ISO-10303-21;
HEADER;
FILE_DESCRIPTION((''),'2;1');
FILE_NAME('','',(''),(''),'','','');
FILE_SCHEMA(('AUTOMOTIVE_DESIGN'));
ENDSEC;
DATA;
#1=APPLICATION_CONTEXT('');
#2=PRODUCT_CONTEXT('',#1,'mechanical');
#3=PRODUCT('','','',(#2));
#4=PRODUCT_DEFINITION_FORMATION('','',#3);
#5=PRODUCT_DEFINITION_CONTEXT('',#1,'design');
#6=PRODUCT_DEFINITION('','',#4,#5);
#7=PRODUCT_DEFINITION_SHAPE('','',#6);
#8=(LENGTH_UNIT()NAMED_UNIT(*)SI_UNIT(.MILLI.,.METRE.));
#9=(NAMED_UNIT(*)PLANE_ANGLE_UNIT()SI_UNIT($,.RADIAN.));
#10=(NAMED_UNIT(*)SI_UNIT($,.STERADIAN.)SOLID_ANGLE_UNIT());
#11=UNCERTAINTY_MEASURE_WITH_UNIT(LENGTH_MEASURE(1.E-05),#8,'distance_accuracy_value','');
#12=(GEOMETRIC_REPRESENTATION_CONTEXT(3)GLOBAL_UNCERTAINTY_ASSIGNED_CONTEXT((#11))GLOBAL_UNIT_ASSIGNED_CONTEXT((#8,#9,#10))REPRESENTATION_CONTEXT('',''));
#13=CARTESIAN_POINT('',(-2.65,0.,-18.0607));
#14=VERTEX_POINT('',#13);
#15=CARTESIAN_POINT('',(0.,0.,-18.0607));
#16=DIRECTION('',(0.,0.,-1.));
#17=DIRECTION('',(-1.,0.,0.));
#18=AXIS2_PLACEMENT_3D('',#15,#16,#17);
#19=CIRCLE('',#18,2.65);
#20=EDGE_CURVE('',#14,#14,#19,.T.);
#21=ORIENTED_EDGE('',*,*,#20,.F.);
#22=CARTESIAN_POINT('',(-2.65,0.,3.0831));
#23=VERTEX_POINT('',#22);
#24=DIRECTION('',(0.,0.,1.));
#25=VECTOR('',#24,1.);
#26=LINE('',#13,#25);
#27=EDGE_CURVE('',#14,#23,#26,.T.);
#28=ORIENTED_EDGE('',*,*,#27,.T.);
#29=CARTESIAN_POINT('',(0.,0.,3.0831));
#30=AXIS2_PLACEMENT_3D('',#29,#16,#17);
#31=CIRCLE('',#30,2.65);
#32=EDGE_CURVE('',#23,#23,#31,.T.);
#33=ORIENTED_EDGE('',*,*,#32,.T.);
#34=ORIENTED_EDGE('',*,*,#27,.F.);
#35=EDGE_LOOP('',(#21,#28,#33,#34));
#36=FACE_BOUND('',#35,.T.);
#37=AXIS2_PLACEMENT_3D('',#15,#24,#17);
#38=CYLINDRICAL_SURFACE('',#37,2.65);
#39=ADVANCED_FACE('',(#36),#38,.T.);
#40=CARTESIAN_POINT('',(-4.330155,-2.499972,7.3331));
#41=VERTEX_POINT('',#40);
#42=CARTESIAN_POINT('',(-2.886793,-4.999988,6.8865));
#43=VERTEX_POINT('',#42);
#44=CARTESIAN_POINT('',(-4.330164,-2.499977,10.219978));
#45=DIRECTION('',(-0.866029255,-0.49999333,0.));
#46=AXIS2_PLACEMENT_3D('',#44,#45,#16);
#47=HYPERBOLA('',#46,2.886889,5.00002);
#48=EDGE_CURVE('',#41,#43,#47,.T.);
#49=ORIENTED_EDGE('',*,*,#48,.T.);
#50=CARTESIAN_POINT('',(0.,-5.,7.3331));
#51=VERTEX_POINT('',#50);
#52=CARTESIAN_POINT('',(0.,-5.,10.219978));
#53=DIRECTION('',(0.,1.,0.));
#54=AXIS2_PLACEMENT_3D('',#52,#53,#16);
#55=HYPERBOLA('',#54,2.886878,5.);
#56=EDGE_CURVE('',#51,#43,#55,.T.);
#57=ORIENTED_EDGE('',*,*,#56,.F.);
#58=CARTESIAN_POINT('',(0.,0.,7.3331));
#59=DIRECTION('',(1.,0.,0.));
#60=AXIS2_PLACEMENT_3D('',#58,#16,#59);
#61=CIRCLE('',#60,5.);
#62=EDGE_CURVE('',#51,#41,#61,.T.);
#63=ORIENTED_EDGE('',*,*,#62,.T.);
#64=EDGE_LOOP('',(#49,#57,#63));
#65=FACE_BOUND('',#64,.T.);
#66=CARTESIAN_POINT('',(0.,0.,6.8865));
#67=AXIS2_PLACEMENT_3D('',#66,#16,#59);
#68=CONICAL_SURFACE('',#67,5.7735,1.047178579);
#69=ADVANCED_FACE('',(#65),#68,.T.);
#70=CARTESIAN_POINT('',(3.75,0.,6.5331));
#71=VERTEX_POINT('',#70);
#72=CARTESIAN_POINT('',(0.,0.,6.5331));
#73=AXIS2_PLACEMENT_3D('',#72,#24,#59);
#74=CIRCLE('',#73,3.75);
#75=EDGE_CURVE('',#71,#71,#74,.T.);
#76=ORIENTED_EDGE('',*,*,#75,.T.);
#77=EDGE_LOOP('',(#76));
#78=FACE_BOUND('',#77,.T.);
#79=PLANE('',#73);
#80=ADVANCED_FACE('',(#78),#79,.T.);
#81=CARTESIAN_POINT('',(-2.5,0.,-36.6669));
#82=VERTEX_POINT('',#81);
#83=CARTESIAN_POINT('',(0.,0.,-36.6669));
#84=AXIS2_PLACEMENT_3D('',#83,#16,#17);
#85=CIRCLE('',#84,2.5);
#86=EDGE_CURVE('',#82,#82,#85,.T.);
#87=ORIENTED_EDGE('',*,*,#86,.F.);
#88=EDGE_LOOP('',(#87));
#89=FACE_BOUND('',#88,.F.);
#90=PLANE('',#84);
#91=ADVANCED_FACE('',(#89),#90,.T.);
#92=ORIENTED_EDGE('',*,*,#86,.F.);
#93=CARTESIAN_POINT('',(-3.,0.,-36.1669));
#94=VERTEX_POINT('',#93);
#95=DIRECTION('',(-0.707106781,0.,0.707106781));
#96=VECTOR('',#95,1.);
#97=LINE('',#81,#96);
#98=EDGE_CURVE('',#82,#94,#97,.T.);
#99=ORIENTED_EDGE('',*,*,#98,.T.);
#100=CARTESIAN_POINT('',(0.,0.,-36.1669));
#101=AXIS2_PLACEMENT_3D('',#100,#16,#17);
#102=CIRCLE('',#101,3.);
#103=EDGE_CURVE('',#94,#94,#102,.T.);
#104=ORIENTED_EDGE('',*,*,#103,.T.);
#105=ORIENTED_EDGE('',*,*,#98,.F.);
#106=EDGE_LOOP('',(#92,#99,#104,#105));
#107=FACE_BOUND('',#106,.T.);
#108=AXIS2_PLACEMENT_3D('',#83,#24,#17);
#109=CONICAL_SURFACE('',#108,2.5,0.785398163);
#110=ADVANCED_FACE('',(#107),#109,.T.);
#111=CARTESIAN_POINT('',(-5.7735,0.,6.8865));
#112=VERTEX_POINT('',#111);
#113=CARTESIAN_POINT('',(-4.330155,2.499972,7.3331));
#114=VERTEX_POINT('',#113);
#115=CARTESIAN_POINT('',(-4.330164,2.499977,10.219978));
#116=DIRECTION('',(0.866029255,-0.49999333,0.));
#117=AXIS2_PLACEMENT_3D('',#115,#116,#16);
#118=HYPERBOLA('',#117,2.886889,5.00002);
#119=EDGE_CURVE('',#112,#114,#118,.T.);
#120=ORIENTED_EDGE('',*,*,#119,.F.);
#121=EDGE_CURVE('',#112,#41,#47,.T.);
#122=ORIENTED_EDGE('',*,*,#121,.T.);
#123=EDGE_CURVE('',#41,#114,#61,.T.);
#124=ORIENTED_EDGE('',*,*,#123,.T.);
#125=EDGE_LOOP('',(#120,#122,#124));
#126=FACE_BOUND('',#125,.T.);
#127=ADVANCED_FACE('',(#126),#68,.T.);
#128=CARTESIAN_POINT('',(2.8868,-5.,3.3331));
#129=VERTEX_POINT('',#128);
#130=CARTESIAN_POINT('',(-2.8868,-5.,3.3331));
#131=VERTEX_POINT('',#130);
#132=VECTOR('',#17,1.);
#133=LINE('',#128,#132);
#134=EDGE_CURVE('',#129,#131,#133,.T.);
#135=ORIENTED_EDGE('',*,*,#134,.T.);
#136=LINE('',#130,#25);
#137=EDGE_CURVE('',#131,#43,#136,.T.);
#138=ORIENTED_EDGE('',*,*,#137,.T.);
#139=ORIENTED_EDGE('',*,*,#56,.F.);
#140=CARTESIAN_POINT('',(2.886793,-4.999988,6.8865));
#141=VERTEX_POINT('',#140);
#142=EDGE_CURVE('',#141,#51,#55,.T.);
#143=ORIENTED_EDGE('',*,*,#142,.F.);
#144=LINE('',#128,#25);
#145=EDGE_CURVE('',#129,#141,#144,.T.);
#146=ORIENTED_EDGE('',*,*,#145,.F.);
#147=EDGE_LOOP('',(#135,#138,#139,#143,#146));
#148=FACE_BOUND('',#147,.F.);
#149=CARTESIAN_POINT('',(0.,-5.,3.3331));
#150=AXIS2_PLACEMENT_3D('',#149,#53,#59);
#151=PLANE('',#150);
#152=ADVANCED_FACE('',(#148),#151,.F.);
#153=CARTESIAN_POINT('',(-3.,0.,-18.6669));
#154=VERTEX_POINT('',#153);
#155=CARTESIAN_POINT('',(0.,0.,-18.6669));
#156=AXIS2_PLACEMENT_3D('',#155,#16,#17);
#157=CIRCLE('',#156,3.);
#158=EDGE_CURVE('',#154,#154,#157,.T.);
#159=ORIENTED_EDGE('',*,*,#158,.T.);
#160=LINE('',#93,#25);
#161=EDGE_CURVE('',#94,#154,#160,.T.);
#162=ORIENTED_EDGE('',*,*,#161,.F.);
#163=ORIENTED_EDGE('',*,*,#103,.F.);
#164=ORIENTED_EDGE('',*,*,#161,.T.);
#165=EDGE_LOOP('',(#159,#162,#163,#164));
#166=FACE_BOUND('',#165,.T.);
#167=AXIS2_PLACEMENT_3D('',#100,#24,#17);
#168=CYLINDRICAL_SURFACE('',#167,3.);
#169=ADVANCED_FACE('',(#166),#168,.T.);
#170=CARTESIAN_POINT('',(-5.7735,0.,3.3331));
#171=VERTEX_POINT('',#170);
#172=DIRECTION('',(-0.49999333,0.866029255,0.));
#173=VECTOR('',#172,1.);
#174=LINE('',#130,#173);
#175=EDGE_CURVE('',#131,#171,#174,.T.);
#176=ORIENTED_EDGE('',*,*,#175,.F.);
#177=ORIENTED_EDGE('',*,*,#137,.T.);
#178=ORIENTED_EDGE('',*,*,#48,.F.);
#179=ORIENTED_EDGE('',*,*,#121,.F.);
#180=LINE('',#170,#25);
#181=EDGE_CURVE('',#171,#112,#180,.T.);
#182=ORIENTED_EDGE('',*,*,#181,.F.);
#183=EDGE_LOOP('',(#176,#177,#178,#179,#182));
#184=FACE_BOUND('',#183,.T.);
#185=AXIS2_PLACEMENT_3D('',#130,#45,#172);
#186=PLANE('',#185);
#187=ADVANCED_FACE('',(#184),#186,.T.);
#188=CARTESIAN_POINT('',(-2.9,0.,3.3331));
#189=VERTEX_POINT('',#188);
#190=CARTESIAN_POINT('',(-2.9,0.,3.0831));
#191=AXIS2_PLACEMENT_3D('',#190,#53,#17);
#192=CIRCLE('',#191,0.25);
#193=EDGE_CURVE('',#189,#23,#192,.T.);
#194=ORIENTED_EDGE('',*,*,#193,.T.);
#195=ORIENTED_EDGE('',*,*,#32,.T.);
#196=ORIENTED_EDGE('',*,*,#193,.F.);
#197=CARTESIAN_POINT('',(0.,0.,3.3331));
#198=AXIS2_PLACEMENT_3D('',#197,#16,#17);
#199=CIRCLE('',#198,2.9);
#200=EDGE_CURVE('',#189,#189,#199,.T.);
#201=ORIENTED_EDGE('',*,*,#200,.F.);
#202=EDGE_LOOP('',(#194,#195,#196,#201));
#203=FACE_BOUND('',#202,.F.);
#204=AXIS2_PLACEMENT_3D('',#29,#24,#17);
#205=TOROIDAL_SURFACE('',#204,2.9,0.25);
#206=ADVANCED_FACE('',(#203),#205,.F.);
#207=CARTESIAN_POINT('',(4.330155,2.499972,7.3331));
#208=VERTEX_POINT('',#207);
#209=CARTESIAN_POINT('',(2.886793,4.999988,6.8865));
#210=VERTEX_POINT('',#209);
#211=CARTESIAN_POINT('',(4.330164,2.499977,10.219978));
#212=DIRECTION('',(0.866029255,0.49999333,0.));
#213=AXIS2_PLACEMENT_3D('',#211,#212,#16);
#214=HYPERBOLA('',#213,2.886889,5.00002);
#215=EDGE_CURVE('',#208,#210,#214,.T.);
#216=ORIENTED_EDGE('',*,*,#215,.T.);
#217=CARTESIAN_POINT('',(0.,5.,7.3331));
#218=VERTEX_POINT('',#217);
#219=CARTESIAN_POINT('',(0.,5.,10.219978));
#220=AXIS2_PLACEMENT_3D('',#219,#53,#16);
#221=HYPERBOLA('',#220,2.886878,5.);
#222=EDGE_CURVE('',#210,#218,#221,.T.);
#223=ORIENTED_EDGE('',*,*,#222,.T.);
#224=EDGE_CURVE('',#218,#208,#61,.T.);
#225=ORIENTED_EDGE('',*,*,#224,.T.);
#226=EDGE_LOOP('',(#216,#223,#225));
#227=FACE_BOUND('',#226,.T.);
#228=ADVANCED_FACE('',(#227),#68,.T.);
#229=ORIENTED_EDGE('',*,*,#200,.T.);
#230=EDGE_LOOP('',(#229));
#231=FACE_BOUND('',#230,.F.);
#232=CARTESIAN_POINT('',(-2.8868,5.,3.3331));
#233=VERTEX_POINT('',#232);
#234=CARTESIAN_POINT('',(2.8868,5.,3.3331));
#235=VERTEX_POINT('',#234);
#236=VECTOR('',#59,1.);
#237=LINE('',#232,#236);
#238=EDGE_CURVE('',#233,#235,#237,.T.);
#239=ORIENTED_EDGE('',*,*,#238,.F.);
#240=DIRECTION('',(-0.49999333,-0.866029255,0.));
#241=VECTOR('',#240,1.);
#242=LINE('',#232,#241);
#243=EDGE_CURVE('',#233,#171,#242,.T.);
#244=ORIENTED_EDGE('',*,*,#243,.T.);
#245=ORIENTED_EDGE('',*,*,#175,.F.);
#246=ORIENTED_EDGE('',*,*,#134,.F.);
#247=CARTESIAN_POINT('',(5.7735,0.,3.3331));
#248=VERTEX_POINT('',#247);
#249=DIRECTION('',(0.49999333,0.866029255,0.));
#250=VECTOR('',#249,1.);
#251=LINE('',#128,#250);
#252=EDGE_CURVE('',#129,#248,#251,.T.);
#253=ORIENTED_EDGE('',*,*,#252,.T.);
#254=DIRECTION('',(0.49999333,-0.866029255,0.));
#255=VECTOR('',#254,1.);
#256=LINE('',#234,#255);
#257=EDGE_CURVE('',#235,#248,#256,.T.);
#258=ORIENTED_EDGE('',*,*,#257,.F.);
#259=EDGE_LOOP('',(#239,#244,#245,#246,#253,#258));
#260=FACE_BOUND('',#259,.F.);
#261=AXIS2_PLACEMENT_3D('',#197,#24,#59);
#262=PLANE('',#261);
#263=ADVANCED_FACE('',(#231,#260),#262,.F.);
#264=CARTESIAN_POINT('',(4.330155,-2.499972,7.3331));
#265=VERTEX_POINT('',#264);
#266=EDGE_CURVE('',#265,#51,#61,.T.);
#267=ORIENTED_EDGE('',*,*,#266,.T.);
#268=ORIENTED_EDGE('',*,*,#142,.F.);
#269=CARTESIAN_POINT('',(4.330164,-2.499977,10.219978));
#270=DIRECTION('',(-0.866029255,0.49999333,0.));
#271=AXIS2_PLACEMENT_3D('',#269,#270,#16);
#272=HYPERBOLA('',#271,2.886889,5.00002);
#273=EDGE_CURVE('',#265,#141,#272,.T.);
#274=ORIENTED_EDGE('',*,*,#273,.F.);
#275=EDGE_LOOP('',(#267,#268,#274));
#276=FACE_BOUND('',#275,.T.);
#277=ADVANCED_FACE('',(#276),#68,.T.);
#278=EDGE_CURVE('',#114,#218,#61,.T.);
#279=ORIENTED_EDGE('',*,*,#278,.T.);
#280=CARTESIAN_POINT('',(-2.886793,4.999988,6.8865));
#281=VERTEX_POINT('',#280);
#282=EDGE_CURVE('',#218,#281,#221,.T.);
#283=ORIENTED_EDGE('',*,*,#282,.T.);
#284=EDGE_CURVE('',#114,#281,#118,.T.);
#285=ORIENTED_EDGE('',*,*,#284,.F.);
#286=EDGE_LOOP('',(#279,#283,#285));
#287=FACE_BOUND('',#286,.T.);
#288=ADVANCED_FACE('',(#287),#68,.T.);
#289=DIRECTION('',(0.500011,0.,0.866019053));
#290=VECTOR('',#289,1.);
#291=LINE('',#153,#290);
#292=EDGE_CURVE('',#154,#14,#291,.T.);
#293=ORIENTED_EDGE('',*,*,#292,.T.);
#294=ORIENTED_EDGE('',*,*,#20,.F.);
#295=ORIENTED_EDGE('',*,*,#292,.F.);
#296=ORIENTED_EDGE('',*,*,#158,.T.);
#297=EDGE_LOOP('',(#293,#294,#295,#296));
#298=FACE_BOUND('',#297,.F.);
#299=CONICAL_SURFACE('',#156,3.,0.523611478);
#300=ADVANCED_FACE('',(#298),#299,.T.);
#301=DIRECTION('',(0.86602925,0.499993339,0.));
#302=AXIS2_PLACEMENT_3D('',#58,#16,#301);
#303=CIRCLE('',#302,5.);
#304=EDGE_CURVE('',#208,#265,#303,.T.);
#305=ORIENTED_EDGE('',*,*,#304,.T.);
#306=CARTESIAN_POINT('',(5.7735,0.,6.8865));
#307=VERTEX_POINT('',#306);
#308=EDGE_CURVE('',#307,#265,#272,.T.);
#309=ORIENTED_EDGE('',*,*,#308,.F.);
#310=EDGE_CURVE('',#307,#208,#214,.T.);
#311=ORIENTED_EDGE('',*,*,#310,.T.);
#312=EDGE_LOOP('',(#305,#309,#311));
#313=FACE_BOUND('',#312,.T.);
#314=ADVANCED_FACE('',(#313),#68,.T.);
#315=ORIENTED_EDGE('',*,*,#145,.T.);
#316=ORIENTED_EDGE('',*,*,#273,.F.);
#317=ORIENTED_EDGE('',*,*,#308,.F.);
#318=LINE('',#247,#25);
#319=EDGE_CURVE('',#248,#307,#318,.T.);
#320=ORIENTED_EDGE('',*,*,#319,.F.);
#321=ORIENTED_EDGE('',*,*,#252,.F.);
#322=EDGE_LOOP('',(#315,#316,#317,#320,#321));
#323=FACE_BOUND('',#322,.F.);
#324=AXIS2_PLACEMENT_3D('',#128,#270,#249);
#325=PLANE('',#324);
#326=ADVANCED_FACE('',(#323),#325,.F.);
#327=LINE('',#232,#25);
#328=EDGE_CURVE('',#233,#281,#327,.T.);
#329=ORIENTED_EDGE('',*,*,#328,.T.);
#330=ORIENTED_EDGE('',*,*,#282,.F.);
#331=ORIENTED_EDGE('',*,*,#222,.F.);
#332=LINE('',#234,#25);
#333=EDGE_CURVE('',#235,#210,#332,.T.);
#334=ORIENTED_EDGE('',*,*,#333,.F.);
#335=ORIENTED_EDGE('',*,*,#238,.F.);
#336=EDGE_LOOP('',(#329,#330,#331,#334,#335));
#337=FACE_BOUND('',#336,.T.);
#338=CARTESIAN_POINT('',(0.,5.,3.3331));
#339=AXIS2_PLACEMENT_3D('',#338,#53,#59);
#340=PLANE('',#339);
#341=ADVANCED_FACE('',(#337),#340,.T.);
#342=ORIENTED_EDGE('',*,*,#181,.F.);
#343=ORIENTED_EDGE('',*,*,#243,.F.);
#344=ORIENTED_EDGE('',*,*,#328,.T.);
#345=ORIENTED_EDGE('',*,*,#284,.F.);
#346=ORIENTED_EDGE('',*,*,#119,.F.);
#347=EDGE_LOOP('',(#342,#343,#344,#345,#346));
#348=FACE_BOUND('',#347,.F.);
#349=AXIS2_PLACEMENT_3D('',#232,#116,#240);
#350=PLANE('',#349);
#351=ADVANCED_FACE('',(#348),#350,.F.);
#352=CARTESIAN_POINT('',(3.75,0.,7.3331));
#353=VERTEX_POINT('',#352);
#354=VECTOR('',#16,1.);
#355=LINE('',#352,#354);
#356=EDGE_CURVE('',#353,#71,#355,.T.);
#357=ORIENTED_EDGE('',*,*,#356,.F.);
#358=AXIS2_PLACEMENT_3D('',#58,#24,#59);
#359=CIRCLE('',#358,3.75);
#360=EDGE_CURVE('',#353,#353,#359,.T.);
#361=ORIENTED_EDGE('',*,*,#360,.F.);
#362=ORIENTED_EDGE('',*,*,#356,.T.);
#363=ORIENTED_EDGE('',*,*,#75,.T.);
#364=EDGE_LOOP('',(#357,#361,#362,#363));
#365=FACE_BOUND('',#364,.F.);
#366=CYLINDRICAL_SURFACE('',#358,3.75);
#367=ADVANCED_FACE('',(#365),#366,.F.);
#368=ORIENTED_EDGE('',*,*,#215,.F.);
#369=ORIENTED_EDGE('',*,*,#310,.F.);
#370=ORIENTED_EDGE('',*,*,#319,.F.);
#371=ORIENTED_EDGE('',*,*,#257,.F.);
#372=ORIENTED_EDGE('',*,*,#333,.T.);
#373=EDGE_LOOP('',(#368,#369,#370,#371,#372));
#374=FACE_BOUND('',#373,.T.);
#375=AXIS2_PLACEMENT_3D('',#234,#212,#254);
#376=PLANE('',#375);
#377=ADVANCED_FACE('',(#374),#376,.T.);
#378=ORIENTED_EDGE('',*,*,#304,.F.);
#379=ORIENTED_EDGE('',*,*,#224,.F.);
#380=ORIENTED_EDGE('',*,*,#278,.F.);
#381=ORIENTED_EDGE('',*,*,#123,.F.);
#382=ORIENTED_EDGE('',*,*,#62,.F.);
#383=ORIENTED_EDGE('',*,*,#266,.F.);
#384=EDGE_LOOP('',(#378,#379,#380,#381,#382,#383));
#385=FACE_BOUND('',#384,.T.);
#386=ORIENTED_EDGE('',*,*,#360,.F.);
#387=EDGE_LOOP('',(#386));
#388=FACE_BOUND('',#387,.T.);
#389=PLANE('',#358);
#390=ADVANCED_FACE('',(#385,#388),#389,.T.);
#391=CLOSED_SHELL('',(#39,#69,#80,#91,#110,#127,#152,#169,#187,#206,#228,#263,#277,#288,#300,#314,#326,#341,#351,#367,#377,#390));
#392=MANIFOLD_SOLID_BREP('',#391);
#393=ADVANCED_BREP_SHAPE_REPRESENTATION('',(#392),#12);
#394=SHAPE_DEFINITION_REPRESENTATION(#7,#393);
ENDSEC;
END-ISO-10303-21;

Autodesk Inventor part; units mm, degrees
ref_plane "YZ Plane" through (0, 0, 0) normal (1, 0, 0) x (0, 1, 0)
sketch "Sketch2" plane through (0, 0, 0) normal (0, 1, 0) x (-1, 0, 0)
  line L0 (0, 3.3331) -> (0, -36.6669)
  line L1 (0, -36.6669) -> (2.5, -36.6669)
  line L2 (3, -36.1669) -> (3, -18.6669)
  line L3 (3, -18.6669) -> (2.65, -18.0607)
  line L4 (2.65, -18.0607) -> (2.65, 3.3331)
  line L5 (2.65, 3.3331) -> (0, 3.3331)
  line L6 (2.5, -36.6669) -> (3, -36.1669)
  line L7 (3, -36.6669) -> (3, -37.374)
  line L8 (0, -45.5155) -> (0, 11.4745) projected
  dimension "Ds" = 5.3
  dimension "NND" = 6
  dimension "b" = 18
  dimension "d3" = 30
  dimension "d5" = 45
  dimension "PTC" = 1
  dimension "NLG" = 40
revolve "Revolution1" add sketch "Sketch2" angle 360 about axis through (0, 0, 3.3331) along (0, 0, -1)
sketch "Sketch3" plane through (0, 0, 3.3331) normal (0, 0, 1) x (1, 0, 0)
  circle A0 centre (0, 0) radius 2.65 projected
  line L0 (0, 5) -> (2.8868, 5)
  line L1 (2.8868, 5) -> (5.7735, 0)
  line L2 (5.7735, 0) -> (0, 0)
  line L3 (0, 0) -> (0, 5)
  line L4 (0, 5) -> (-2.8868, 5)
  line L5 (-2.8868, 5) -> (-5.7735, 0)
  line L6 (0, -5) -> (2.8868, -5)
  line L7 (2.8868, -5) -> (5.7735, 0)
  line L8 (-2.8868, -5) -> (-5.7735, 0)
  line L9 (0, -5) -> (-2.8868, -5)
  dimension "d9" = 60
  dimension "ParS" = 10
  dimension "msp_d11" = 10
extrude "Extrusion1" add sketch "Sketch3" along normal blind 4
sketch "Sketch4" plane through (0, 0, 0) normal (0, 1, 0) x (-1, 0, 0)
  line L0 (-5, 7.3331) -> (-5.7735, 7.3331)
  line L1 (-5.7735, 7.3331) -> (-5.7735, 6.8865)
  line L2 (-5.7735, 6.8865) -> (-5, 7.3331)
  line L3 (0, -1.5254) -> (0, 32.4838) projected
  line L4 (0, 27.6253) -> (0, 27.1787)
  line L5 (-5.7735, 3.3331) -> (-5.7735, 7.3331) projected
  line L6 (-2.8868, 7.3331) -> (-5.7735, 7.3331) projected
  dimension "d14" = 30
  dimension "msp_d15" = 10
revolve "Revolution2" cut sketch "Sketch4" angle 360 about axis through (0, 0, 27.6253) along (0, 0, -1)
sketch "Sketch5" plane through (0, 0, 7.3331) normal (0, 0, 1) x (1, 0, 0)
  arc A0 (4.3301, 2.5) -> (0, 5) centre (0, 0) ccw projected
  circle A1 centre (0, 0) radius 3.75
  dimension "d27" = 7.5
extrude "Extrusion2" cut sketch "Sketch5" against normal blind 0.8
thread "Thread1" size "M6x1" class "6g" standard "ISO Metric profile" full length
ref_plane "MSC_PF1" through (0, 0, 0) normal (0, 1, 0) x (-1, 0, 0)
ref_plane "MSC_PT1" through (0, 0, 3.3331) normal (0, 0, -1) x (-1, 0, 0)
fillet "Fillet1" radius 0.25 1 edges at (2.65, 0, 3.3331)
equation "\"msp_d11\" = ParS"
equation "\"msp_d15\" = ParS"
equation "\"d27\" = 0.75 * ParS"
equation "\"d28\" = 0.2 * ParK"
equation "\"d30\" = r"
equation "\"msp_d17\" = b"
equation "\"r\" = 0.25"
equation "\"THREADDIA\" = NND"
equation "\"ParK\" = 4"
properties part number "ISO 4015 - M6 x 40" material "Stainless Steel, 440C"
